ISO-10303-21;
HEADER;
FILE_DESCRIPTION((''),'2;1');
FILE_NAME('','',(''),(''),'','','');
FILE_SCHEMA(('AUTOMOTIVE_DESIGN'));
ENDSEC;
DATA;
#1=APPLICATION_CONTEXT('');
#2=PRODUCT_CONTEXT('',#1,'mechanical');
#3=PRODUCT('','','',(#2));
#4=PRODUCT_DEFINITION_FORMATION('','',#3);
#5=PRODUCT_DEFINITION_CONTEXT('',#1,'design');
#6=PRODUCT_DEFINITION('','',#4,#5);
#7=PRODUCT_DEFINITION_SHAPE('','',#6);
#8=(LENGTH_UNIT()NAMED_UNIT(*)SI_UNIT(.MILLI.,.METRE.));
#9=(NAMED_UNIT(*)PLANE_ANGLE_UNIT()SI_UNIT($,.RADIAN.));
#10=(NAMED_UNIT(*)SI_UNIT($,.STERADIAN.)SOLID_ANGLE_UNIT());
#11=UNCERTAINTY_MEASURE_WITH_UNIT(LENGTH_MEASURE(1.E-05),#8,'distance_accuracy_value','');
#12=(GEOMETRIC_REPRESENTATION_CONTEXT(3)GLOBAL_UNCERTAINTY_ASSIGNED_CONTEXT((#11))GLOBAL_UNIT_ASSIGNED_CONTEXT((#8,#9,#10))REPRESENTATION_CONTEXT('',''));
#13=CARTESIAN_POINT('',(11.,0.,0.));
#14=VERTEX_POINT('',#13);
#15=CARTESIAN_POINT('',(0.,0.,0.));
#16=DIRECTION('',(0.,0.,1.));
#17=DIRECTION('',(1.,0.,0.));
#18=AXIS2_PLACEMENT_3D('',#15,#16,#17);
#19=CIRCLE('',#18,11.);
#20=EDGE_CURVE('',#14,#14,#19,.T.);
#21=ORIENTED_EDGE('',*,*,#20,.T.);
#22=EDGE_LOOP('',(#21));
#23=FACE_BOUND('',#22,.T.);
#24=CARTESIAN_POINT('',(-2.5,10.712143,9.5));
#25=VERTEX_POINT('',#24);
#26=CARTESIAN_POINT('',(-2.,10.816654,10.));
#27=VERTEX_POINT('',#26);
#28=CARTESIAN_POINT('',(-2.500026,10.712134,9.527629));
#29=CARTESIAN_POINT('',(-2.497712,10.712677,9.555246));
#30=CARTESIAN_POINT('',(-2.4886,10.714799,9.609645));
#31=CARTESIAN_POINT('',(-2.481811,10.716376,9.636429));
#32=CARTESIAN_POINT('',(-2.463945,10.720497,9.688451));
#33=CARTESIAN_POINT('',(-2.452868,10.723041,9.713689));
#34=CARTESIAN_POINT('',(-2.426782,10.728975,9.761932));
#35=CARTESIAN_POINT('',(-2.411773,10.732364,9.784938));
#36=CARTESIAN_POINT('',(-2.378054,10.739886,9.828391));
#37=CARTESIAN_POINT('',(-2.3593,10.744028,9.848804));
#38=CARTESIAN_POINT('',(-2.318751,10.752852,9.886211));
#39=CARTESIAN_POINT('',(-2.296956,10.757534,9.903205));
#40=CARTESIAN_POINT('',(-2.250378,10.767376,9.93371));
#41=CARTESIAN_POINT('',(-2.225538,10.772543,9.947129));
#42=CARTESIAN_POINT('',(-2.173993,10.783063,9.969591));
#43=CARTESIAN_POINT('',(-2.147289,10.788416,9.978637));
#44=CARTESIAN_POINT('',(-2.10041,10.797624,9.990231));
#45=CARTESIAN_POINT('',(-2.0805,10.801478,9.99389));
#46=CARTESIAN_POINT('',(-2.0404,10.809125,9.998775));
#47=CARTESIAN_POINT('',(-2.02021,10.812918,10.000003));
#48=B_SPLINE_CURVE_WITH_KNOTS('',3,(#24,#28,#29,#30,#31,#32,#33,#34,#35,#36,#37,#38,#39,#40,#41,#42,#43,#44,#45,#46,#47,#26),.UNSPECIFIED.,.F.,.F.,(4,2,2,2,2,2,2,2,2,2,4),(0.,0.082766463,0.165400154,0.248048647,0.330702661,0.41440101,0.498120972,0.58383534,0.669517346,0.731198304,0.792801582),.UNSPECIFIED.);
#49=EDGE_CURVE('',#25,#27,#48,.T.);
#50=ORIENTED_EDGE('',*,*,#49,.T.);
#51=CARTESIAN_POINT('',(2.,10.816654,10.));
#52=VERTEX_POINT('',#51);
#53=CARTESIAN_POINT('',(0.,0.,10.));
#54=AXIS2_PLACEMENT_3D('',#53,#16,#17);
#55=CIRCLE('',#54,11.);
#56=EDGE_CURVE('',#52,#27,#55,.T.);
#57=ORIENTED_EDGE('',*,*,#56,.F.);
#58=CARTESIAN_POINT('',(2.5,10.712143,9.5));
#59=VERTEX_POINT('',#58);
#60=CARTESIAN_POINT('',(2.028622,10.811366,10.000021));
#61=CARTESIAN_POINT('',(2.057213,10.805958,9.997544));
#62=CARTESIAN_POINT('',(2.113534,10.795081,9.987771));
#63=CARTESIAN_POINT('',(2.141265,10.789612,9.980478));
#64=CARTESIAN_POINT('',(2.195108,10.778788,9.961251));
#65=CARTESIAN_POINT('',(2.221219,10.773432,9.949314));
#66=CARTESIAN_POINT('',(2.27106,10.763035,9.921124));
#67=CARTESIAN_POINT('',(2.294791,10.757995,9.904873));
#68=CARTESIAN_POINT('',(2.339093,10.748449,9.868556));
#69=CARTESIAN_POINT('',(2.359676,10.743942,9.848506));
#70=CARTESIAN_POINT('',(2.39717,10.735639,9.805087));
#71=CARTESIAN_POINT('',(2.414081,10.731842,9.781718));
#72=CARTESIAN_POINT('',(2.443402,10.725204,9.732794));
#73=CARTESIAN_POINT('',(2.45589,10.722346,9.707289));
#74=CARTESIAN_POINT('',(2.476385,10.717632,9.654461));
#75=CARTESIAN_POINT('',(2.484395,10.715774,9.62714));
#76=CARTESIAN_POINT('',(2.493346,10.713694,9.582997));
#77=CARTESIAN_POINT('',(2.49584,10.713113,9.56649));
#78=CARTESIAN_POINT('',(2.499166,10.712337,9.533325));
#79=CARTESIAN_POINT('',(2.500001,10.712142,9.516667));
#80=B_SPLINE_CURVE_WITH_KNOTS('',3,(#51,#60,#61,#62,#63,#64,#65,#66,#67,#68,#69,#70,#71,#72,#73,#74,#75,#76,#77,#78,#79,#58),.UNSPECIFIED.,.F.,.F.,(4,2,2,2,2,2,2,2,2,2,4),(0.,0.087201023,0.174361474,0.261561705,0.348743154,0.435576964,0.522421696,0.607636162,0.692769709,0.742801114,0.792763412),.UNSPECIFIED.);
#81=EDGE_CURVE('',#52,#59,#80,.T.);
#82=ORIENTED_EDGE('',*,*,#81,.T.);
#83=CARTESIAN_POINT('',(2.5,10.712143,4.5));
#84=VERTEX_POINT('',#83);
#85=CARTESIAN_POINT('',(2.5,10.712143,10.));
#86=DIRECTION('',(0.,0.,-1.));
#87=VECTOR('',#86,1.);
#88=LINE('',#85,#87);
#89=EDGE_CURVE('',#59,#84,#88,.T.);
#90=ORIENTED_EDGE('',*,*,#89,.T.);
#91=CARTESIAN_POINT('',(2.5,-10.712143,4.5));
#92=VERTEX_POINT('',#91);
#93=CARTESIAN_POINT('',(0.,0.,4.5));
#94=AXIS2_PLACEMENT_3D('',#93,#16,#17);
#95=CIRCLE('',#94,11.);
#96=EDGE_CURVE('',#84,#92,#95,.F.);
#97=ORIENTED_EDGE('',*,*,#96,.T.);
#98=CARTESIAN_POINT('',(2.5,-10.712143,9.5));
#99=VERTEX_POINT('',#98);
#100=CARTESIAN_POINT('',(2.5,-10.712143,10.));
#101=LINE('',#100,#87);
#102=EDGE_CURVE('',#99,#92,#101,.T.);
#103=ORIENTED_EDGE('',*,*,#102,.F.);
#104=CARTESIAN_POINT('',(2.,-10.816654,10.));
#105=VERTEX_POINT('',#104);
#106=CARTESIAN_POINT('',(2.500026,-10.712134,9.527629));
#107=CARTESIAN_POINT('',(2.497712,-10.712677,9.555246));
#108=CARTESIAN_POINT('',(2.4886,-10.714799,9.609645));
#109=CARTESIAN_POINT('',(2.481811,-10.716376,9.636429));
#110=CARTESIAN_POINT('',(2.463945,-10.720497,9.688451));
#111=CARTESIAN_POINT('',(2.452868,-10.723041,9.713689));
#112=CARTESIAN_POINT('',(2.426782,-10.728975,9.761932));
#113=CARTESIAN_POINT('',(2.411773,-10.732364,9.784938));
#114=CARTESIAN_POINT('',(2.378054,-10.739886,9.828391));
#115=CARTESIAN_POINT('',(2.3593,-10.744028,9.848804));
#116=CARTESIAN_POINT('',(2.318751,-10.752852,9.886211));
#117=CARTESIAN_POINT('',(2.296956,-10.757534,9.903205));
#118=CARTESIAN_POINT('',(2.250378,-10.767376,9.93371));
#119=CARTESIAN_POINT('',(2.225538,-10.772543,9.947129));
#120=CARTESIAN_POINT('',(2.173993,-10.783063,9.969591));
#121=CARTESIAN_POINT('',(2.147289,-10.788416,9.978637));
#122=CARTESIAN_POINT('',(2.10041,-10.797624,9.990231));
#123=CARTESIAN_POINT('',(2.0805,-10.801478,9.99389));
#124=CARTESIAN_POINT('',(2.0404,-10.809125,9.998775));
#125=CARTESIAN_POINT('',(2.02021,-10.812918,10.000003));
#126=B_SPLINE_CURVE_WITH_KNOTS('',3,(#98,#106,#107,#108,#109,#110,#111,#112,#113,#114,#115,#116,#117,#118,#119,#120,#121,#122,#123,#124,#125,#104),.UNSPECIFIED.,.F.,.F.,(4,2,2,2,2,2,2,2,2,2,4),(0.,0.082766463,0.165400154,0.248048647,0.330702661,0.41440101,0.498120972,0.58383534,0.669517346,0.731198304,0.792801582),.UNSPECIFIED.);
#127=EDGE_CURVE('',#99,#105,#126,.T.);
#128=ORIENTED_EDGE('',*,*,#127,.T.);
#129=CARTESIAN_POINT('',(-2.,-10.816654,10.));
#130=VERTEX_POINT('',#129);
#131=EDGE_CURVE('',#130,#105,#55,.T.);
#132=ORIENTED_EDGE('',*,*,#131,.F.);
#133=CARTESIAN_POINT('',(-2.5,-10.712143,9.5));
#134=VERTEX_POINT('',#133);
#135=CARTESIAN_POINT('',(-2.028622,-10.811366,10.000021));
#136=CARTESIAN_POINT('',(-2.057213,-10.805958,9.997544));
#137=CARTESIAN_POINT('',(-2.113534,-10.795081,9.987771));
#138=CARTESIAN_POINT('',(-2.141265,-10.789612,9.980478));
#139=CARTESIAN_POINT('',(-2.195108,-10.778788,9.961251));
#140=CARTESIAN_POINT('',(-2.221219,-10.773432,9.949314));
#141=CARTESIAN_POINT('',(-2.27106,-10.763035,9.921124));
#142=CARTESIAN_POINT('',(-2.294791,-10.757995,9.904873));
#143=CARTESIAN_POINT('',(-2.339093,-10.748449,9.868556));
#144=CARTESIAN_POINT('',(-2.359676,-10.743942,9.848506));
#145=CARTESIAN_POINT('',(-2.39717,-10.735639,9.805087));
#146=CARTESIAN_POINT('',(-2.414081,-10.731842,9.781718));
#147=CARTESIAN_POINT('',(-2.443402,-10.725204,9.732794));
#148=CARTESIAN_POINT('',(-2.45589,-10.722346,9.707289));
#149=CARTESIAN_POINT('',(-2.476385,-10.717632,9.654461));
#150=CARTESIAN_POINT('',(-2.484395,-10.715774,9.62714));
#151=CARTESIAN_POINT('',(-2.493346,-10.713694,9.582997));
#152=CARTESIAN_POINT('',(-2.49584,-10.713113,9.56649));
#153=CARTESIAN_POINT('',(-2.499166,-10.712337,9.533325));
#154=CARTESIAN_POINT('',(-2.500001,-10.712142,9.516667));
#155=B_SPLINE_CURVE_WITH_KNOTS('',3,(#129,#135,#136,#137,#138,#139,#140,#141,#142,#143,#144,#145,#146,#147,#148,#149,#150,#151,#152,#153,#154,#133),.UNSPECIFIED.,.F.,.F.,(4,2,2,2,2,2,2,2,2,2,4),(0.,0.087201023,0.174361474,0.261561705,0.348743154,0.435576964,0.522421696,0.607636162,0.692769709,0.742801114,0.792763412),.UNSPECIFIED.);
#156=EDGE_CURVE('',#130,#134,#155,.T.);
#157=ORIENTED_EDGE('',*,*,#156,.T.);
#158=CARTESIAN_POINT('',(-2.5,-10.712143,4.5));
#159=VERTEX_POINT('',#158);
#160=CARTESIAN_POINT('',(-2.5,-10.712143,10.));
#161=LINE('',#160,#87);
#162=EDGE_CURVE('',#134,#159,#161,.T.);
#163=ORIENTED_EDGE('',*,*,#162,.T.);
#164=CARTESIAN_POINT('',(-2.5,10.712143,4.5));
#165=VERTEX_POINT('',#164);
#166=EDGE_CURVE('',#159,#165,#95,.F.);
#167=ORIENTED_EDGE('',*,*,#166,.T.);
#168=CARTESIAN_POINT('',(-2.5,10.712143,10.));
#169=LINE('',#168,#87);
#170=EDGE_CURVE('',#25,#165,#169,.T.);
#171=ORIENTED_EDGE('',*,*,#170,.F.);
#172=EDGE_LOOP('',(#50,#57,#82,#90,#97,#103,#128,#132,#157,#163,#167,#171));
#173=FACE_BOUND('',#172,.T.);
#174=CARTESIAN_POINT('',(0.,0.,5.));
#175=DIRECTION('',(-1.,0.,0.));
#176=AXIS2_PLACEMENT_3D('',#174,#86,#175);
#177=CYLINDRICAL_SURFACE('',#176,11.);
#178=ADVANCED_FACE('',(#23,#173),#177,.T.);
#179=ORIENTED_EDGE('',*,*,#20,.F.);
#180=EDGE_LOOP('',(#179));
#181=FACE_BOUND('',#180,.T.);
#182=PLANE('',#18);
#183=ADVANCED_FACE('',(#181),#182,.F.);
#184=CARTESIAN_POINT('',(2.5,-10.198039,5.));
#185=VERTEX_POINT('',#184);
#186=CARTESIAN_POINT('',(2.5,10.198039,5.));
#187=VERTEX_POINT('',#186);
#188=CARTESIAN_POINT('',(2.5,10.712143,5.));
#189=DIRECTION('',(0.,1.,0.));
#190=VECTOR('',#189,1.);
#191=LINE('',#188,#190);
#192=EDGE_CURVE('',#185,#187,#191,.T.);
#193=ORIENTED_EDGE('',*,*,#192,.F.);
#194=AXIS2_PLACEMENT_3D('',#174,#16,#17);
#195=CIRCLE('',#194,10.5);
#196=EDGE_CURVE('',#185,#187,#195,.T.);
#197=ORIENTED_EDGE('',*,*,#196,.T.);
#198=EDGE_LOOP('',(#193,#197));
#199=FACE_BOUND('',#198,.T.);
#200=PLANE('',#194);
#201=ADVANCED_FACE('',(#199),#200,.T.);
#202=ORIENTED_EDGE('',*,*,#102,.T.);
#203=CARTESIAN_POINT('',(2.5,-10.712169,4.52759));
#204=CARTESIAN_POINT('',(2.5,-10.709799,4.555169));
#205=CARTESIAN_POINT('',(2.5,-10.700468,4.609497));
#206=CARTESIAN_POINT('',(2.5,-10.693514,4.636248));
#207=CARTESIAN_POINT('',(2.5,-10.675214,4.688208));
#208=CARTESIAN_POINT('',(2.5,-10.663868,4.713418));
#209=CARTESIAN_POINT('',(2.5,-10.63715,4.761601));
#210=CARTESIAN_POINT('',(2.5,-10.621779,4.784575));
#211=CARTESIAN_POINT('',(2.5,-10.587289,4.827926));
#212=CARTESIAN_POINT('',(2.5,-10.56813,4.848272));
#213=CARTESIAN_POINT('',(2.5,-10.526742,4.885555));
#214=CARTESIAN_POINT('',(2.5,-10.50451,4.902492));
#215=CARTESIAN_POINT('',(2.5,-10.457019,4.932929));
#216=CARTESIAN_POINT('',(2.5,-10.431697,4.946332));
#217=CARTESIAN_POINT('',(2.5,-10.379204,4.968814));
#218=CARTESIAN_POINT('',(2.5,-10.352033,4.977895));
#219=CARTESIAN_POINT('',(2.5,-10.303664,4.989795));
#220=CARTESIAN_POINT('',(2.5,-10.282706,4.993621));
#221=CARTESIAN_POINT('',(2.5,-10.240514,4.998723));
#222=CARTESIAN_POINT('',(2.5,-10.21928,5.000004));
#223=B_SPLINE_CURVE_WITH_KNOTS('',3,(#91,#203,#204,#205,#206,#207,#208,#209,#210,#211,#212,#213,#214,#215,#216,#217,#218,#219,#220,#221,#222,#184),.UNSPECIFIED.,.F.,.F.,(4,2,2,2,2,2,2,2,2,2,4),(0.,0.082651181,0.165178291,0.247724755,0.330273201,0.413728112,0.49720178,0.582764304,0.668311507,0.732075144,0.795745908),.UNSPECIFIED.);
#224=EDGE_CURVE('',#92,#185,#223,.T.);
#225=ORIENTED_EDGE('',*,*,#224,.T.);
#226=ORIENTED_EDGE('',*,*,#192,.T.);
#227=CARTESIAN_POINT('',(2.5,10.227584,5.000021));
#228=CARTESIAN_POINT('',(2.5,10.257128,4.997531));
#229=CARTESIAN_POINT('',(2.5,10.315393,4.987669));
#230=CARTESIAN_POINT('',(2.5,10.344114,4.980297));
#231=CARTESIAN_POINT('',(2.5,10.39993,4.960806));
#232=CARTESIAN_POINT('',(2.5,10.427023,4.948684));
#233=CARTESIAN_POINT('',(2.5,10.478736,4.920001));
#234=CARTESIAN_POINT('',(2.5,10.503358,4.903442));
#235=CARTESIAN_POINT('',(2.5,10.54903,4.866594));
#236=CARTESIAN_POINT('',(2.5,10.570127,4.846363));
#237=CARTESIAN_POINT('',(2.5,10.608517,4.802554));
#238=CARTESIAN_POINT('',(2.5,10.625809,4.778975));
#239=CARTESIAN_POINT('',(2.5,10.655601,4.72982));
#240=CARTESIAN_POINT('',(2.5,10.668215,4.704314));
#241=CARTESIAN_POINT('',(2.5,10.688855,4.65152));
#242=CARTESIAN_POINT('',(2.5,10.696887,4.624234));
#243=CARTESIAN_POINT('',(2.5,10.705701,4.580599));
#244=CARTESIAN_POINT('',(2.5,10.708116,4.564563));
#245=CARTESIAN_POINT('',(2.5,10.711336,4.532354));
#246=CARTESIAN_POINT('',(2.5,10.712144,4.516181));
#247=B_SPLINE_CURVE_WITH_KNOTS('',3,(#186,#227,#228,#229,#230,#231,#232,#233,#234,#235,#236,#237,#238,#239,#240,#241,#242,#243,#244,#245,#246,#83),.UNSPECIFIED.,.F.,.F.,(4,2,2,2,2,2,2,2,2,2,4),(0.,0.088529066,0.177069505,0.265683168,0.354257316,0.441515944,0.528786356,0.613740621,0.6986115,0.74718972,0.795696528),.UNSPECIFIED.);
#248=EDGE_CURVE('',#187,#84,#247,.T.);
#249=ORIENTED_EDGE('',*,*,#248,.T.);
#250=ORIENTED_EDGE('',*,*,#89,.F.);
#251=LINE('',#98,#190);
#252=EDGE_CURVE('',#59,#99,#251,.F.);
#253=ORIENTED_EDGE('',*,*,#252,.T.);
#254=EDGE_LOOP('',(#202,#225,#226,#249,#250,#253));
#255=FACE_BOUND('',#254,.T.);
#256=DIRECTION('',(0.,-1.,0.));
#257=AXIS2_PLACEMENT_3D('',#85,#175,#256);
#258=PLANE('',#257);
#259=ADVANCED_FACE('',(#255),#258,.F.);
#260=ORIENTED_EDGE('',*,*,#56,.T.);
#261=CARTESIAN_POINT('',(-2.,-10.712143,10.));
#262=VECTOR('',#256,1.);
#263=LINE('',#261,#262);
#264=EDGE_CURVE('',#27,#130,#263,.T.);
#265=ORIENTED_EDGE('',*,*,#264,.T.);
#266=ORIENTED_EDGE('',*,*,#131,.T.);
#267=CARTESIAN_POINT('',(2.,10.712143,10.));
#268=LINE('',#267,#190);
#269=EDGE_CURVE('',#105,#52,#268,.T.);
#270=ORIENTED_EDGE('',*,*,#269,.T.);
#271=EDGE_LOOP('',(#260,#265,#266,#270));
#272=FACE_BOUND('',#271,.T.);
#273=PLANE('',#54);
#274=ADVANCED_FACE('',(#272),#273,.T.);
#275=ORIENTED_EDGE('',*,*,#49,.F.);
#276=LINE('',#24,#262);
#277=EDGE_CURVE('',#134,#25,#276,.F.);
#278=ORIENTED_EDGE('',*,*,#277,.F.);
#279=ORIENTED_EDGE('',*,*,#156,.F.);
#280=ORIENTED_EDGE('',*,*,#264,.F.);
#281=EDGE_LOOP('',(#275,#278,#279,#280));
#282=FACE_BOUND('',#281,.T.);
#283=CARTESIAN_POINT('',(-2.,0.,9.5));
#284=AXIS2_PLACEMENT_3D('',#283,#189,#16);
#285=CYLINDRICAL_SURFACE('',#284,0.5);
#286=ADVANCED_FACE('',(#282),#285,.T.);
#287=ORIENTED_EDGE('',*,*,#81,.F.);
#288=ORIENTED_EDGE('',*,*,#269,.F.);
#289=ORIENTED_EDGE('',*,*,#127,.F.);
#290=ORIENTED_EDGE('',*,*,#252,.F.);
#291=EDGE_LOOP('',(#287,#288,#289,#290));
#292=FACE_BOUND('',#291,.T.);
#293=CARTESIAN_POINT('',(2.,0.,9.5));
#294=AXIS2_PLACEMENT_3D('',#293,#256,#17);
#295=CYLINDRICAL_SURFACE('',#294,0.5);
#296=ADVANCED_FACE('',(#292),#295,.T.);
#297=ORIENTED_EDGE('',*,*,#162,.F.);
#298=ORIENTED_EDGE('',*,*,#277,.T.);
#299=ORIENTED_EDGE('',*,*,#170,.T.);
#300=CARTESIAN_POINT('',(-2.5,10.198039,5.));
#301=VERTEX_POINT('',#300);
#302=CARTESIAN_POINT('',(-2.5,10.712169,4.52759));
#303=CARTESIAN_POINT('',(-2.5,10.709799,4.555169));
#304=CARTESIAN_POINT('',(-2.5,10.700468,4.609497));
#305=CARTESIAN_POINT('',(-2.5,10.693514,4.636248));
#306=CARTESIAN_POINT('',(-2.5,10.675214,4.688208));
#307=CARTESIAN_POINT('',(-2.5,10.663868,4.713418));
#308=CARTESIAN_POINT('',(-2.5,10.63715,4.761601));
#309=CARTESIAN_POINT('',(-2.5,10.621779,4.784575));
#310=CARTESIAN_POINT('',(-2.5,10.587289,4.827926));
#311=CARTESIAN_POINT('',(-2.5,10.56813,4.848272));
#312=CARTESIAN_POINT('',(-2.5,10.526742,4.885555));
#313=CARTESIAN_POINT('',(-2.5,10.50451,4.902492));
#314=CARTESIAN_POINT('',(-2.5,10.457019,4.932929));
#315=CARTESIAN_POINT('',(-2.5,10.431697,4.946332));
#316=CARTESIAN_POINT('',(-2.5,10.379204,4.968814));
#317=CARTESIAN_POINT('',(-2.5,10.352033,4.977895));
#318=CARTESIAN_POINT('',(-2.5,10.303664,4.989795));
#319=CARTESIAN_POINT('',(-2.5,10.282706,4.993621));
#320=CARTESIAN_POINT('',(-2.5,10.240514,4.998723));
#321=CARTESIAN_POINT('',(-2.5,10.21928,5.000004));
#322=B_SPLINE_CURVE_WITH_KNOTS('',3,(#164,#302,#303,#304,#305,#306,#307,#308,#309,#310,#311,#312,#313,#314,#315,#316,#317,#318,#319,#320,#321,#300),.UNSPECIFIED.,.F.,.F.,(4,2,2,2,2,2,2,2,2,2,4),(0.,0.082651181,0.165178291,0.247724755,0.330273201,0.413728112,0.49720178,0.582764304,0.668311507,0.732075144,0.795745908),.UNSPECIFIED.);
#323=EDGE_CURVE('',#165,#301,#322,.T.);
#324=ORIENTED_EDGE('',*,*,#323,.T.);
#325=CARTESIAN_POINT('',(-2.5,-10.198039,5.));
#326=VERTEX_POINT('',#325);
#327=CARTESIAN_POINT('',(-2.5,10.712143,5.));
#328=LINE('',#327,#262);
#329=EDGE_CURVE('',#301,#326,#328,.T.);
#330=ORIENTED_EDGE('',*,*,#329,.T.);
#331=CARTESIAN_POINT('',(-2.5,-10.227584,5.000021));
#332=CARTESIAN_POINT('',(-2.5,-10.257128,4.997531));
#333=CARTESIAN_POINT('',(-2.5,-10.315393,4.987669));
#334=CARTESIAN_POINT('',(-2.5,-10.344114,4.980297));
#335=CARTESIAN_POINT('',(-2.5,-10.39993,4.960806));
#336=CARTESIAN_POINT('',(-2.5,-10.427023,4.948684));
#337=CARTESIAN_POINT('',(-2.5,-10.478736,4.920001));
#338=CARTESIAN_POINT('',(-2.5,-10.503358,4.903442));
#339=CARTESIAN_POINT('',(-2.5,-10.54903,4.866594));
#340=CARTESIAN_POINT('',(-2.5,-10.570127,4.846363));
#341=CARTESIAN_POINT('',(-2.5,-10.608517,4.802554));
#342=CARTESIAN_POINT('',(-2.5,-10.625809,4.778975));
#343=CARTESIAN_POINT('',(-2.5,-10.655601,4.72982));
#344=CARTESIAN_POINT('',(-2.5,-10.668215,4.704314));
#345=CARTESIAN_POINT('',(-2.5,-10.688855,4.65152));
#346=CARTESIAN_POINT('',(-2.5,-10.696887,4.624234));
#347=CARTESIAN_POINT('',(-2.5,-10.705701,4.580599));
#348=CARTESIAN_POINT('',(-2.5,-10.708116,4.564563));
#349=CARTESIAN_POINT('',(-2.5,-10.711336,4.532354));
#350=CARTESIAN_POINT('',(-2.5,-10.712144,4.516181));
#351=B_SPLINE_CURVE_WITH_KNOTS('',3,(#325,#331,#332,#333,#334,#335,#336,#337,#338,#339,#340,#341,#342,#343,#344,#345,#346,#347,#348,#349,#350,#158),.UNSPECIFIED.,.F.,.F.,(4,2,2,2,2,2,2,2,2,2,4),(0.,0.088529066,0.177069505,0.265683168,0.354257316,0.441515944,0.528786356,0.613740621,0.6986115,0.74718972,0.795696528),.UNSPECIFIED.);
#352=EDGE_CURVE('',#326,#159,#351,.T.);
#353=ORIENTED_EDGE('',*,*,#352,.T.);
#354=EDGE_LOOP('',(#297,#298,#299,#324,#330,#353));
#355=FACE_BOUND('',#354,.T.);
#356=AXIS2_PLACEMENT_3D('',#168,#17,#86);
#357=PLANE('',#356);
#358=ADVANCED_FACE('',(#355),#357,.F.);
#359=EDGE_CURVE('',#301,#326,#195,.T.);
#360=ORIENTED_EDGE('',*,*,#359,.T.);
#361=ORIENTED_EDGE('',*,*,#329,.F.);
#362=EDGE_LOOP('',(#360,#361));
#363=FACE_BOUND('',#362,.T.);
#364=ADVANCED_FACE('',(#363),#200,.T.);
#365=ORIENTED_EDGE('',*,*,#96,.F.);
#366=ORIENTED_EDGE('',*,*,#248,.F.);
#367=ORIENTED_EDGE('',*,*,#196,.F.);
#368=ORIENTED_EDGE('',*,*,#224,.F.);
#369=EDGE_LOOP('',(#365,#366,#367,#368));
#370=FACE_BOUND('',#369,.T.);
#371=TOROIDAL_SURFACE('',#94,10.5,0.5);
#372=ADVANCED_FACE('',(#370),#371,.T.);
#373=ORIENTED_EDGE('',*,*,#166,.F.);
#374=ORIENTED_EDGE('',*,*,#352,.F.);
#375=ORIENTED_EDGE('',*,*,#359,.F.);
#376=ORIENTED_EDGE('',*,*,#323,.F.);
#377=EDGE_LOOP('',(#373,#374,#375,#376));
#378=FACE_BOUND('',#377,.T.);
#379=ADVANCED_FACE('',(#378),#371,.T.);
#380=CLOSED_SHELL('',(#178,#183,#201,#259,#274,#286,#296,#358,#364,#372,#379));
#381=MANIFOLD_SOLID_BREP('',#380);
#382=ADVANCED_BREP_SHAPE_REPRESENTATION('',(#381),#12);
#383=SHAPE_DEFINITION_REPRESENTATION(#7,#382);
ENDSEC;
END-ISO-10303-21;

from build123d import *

# Parameters (mm, degrees)
ESQUISSE1_R        = 11
BOSS_EXTRU_1_DEPTH = 5
BOSS_EXTRU_2_DEPTH = 5
CONG_1_R           = 0.5
CONG_2_R           = 0.5


with BuildPart() as part:
    # Esquisse1 → Boss.-Extru.1 (new body)
    with BuildSketch(Plane.XY):
        Circle(ESQUISSE1_R)
    extrude(amount=BOSS_EXTRU_1_DEPTH)

    # Esquisse2 → Boss.-Extru.2 (add)
    with BuildSketch(Plane.XY.offset(5)):
        with BuildLine():
            Line((-2.5, 10.712142643), (-2.5, -10.712142643))
            ThreePointArc((-2.5, -10.712142643), (0, -11), (2.5, -10.712142643))
            Line((2.5, -10.712142643), (2.5, 10.712142643))
            ThreePointArc((2.5, 10.712142643), (0, 11), (-2.5, 10.712142643))
        make_face()
    extrude(amount=BOSS_EXTRU_2_DEPTH)

    # Congé1
    # the kernel refuses this fillet: 0.5 mm, written as the material it takes off along each edge
    with BuildSketch(Plane(origin=(0, 0, 5), x_dir=(1, 0, 0), z_dir=(0, -1, 0))) as cong_1_piece_1_section:
        with BuildLine():
            CenterArc((11 - CONG_1_R, -CONG_1_R), CONG_1_R, 0, 90)
            Line((11 - CONG_1_R, 0), (11, 0))
            Line((11, 0), (11, -CONG_1_R))
        make_face()
    cong_1_piece_1 = revolve(axis=Axis((0, 0, 5), (0, 0, 1)), revolution_arc=83.376232782, mode=Mode.PRIVATE)
    cong_1_piece_1 = split(cong_1_piece_1, bisect_by=Plane(origin=(2.5, 6.750657891, 4.860453912), z_dir=(1, 0, 0)), keep=Keep.TOP, mode=Mode.PRIVATE)
    add(cong_1_piece_1, mode=Mode.SUBTRACT)
    with BuildSketch(Plane(origin=(0, 0, 5), x_dir=(-0.11524991416990704, 0.9933365277104376, 0), z_dir=(0.9933365277104376, 0.11524991416990704, 0))) as cong_1_piece_2_section:
        with BuildLine():
            CenterArc((11 - CONG_1_R, -CONG_1_R), CONG_1_R, 0, 90)
            Line((11 - CONG_1_R, 0), (11, 0))
            Line((11, 0), (11, -CONG_1_R))
        make_face()
    cong_1_piece_2 = revolve(axis=Axis((0, 0, 5), (0, 0, 1)), revolution_arc=166.76392016, mode=Mode.PRIVATE)
    cong_1_piece_2 = split(cong_1_piece_2, bisect_by=Plane(origin=(-2.5, 0, 4.862247452), z_dir=(-1, 0, 0)), keep=Keep.TOP, mode=Mode.PRIVATE)
    add(cong_1_piece_2, mode=Mode.SUBTRACT)
    with BuildSketch(Plane(origin=(0, 0, 5), x_dir=(0.1153492077124676, -0.9933250023431938, 0), z_dir=(-0.9933250023431938, -0.1153492077124676, 0))) as cong_1_piece_3_section:
        with BuildLine():
            CenterArc((11 - CONG_1_R, -CONG_1_R), CONG_1_R, 0, 90)
            Line((11 - CONG_1_R, 0), (11, 0))
            Line((11, 0), (11, -CONG_1_R))
        make_face()
    cong_1_piece_3 = revolve(axis=Axis((0, 0, 5), (0, 0, 1)), revolution_arc=83.376232782, mode=Mode.PRIVATE)
    cong_1_piece_3 = split(cong_1_piece_3, bisect_by=Plane(origin=(2.5, -6.750657902, 4.860453931), z_dir=(1, 0, 0)), keep=Keep.TOP, mode=Mode.PRIVATE)
    add(cong_1_piece_3, mode=Mode.SUBTRACT)

    # Congé2
    cong_2_edges = [part.edges().sort_by_distance(p)[0] for p in [
        (-2.5, 0, 10),
        (2.5, 0, 10),
    ]]
    fillet(cong_2_edges, radius=CONG_2_R)


solid = part.part
